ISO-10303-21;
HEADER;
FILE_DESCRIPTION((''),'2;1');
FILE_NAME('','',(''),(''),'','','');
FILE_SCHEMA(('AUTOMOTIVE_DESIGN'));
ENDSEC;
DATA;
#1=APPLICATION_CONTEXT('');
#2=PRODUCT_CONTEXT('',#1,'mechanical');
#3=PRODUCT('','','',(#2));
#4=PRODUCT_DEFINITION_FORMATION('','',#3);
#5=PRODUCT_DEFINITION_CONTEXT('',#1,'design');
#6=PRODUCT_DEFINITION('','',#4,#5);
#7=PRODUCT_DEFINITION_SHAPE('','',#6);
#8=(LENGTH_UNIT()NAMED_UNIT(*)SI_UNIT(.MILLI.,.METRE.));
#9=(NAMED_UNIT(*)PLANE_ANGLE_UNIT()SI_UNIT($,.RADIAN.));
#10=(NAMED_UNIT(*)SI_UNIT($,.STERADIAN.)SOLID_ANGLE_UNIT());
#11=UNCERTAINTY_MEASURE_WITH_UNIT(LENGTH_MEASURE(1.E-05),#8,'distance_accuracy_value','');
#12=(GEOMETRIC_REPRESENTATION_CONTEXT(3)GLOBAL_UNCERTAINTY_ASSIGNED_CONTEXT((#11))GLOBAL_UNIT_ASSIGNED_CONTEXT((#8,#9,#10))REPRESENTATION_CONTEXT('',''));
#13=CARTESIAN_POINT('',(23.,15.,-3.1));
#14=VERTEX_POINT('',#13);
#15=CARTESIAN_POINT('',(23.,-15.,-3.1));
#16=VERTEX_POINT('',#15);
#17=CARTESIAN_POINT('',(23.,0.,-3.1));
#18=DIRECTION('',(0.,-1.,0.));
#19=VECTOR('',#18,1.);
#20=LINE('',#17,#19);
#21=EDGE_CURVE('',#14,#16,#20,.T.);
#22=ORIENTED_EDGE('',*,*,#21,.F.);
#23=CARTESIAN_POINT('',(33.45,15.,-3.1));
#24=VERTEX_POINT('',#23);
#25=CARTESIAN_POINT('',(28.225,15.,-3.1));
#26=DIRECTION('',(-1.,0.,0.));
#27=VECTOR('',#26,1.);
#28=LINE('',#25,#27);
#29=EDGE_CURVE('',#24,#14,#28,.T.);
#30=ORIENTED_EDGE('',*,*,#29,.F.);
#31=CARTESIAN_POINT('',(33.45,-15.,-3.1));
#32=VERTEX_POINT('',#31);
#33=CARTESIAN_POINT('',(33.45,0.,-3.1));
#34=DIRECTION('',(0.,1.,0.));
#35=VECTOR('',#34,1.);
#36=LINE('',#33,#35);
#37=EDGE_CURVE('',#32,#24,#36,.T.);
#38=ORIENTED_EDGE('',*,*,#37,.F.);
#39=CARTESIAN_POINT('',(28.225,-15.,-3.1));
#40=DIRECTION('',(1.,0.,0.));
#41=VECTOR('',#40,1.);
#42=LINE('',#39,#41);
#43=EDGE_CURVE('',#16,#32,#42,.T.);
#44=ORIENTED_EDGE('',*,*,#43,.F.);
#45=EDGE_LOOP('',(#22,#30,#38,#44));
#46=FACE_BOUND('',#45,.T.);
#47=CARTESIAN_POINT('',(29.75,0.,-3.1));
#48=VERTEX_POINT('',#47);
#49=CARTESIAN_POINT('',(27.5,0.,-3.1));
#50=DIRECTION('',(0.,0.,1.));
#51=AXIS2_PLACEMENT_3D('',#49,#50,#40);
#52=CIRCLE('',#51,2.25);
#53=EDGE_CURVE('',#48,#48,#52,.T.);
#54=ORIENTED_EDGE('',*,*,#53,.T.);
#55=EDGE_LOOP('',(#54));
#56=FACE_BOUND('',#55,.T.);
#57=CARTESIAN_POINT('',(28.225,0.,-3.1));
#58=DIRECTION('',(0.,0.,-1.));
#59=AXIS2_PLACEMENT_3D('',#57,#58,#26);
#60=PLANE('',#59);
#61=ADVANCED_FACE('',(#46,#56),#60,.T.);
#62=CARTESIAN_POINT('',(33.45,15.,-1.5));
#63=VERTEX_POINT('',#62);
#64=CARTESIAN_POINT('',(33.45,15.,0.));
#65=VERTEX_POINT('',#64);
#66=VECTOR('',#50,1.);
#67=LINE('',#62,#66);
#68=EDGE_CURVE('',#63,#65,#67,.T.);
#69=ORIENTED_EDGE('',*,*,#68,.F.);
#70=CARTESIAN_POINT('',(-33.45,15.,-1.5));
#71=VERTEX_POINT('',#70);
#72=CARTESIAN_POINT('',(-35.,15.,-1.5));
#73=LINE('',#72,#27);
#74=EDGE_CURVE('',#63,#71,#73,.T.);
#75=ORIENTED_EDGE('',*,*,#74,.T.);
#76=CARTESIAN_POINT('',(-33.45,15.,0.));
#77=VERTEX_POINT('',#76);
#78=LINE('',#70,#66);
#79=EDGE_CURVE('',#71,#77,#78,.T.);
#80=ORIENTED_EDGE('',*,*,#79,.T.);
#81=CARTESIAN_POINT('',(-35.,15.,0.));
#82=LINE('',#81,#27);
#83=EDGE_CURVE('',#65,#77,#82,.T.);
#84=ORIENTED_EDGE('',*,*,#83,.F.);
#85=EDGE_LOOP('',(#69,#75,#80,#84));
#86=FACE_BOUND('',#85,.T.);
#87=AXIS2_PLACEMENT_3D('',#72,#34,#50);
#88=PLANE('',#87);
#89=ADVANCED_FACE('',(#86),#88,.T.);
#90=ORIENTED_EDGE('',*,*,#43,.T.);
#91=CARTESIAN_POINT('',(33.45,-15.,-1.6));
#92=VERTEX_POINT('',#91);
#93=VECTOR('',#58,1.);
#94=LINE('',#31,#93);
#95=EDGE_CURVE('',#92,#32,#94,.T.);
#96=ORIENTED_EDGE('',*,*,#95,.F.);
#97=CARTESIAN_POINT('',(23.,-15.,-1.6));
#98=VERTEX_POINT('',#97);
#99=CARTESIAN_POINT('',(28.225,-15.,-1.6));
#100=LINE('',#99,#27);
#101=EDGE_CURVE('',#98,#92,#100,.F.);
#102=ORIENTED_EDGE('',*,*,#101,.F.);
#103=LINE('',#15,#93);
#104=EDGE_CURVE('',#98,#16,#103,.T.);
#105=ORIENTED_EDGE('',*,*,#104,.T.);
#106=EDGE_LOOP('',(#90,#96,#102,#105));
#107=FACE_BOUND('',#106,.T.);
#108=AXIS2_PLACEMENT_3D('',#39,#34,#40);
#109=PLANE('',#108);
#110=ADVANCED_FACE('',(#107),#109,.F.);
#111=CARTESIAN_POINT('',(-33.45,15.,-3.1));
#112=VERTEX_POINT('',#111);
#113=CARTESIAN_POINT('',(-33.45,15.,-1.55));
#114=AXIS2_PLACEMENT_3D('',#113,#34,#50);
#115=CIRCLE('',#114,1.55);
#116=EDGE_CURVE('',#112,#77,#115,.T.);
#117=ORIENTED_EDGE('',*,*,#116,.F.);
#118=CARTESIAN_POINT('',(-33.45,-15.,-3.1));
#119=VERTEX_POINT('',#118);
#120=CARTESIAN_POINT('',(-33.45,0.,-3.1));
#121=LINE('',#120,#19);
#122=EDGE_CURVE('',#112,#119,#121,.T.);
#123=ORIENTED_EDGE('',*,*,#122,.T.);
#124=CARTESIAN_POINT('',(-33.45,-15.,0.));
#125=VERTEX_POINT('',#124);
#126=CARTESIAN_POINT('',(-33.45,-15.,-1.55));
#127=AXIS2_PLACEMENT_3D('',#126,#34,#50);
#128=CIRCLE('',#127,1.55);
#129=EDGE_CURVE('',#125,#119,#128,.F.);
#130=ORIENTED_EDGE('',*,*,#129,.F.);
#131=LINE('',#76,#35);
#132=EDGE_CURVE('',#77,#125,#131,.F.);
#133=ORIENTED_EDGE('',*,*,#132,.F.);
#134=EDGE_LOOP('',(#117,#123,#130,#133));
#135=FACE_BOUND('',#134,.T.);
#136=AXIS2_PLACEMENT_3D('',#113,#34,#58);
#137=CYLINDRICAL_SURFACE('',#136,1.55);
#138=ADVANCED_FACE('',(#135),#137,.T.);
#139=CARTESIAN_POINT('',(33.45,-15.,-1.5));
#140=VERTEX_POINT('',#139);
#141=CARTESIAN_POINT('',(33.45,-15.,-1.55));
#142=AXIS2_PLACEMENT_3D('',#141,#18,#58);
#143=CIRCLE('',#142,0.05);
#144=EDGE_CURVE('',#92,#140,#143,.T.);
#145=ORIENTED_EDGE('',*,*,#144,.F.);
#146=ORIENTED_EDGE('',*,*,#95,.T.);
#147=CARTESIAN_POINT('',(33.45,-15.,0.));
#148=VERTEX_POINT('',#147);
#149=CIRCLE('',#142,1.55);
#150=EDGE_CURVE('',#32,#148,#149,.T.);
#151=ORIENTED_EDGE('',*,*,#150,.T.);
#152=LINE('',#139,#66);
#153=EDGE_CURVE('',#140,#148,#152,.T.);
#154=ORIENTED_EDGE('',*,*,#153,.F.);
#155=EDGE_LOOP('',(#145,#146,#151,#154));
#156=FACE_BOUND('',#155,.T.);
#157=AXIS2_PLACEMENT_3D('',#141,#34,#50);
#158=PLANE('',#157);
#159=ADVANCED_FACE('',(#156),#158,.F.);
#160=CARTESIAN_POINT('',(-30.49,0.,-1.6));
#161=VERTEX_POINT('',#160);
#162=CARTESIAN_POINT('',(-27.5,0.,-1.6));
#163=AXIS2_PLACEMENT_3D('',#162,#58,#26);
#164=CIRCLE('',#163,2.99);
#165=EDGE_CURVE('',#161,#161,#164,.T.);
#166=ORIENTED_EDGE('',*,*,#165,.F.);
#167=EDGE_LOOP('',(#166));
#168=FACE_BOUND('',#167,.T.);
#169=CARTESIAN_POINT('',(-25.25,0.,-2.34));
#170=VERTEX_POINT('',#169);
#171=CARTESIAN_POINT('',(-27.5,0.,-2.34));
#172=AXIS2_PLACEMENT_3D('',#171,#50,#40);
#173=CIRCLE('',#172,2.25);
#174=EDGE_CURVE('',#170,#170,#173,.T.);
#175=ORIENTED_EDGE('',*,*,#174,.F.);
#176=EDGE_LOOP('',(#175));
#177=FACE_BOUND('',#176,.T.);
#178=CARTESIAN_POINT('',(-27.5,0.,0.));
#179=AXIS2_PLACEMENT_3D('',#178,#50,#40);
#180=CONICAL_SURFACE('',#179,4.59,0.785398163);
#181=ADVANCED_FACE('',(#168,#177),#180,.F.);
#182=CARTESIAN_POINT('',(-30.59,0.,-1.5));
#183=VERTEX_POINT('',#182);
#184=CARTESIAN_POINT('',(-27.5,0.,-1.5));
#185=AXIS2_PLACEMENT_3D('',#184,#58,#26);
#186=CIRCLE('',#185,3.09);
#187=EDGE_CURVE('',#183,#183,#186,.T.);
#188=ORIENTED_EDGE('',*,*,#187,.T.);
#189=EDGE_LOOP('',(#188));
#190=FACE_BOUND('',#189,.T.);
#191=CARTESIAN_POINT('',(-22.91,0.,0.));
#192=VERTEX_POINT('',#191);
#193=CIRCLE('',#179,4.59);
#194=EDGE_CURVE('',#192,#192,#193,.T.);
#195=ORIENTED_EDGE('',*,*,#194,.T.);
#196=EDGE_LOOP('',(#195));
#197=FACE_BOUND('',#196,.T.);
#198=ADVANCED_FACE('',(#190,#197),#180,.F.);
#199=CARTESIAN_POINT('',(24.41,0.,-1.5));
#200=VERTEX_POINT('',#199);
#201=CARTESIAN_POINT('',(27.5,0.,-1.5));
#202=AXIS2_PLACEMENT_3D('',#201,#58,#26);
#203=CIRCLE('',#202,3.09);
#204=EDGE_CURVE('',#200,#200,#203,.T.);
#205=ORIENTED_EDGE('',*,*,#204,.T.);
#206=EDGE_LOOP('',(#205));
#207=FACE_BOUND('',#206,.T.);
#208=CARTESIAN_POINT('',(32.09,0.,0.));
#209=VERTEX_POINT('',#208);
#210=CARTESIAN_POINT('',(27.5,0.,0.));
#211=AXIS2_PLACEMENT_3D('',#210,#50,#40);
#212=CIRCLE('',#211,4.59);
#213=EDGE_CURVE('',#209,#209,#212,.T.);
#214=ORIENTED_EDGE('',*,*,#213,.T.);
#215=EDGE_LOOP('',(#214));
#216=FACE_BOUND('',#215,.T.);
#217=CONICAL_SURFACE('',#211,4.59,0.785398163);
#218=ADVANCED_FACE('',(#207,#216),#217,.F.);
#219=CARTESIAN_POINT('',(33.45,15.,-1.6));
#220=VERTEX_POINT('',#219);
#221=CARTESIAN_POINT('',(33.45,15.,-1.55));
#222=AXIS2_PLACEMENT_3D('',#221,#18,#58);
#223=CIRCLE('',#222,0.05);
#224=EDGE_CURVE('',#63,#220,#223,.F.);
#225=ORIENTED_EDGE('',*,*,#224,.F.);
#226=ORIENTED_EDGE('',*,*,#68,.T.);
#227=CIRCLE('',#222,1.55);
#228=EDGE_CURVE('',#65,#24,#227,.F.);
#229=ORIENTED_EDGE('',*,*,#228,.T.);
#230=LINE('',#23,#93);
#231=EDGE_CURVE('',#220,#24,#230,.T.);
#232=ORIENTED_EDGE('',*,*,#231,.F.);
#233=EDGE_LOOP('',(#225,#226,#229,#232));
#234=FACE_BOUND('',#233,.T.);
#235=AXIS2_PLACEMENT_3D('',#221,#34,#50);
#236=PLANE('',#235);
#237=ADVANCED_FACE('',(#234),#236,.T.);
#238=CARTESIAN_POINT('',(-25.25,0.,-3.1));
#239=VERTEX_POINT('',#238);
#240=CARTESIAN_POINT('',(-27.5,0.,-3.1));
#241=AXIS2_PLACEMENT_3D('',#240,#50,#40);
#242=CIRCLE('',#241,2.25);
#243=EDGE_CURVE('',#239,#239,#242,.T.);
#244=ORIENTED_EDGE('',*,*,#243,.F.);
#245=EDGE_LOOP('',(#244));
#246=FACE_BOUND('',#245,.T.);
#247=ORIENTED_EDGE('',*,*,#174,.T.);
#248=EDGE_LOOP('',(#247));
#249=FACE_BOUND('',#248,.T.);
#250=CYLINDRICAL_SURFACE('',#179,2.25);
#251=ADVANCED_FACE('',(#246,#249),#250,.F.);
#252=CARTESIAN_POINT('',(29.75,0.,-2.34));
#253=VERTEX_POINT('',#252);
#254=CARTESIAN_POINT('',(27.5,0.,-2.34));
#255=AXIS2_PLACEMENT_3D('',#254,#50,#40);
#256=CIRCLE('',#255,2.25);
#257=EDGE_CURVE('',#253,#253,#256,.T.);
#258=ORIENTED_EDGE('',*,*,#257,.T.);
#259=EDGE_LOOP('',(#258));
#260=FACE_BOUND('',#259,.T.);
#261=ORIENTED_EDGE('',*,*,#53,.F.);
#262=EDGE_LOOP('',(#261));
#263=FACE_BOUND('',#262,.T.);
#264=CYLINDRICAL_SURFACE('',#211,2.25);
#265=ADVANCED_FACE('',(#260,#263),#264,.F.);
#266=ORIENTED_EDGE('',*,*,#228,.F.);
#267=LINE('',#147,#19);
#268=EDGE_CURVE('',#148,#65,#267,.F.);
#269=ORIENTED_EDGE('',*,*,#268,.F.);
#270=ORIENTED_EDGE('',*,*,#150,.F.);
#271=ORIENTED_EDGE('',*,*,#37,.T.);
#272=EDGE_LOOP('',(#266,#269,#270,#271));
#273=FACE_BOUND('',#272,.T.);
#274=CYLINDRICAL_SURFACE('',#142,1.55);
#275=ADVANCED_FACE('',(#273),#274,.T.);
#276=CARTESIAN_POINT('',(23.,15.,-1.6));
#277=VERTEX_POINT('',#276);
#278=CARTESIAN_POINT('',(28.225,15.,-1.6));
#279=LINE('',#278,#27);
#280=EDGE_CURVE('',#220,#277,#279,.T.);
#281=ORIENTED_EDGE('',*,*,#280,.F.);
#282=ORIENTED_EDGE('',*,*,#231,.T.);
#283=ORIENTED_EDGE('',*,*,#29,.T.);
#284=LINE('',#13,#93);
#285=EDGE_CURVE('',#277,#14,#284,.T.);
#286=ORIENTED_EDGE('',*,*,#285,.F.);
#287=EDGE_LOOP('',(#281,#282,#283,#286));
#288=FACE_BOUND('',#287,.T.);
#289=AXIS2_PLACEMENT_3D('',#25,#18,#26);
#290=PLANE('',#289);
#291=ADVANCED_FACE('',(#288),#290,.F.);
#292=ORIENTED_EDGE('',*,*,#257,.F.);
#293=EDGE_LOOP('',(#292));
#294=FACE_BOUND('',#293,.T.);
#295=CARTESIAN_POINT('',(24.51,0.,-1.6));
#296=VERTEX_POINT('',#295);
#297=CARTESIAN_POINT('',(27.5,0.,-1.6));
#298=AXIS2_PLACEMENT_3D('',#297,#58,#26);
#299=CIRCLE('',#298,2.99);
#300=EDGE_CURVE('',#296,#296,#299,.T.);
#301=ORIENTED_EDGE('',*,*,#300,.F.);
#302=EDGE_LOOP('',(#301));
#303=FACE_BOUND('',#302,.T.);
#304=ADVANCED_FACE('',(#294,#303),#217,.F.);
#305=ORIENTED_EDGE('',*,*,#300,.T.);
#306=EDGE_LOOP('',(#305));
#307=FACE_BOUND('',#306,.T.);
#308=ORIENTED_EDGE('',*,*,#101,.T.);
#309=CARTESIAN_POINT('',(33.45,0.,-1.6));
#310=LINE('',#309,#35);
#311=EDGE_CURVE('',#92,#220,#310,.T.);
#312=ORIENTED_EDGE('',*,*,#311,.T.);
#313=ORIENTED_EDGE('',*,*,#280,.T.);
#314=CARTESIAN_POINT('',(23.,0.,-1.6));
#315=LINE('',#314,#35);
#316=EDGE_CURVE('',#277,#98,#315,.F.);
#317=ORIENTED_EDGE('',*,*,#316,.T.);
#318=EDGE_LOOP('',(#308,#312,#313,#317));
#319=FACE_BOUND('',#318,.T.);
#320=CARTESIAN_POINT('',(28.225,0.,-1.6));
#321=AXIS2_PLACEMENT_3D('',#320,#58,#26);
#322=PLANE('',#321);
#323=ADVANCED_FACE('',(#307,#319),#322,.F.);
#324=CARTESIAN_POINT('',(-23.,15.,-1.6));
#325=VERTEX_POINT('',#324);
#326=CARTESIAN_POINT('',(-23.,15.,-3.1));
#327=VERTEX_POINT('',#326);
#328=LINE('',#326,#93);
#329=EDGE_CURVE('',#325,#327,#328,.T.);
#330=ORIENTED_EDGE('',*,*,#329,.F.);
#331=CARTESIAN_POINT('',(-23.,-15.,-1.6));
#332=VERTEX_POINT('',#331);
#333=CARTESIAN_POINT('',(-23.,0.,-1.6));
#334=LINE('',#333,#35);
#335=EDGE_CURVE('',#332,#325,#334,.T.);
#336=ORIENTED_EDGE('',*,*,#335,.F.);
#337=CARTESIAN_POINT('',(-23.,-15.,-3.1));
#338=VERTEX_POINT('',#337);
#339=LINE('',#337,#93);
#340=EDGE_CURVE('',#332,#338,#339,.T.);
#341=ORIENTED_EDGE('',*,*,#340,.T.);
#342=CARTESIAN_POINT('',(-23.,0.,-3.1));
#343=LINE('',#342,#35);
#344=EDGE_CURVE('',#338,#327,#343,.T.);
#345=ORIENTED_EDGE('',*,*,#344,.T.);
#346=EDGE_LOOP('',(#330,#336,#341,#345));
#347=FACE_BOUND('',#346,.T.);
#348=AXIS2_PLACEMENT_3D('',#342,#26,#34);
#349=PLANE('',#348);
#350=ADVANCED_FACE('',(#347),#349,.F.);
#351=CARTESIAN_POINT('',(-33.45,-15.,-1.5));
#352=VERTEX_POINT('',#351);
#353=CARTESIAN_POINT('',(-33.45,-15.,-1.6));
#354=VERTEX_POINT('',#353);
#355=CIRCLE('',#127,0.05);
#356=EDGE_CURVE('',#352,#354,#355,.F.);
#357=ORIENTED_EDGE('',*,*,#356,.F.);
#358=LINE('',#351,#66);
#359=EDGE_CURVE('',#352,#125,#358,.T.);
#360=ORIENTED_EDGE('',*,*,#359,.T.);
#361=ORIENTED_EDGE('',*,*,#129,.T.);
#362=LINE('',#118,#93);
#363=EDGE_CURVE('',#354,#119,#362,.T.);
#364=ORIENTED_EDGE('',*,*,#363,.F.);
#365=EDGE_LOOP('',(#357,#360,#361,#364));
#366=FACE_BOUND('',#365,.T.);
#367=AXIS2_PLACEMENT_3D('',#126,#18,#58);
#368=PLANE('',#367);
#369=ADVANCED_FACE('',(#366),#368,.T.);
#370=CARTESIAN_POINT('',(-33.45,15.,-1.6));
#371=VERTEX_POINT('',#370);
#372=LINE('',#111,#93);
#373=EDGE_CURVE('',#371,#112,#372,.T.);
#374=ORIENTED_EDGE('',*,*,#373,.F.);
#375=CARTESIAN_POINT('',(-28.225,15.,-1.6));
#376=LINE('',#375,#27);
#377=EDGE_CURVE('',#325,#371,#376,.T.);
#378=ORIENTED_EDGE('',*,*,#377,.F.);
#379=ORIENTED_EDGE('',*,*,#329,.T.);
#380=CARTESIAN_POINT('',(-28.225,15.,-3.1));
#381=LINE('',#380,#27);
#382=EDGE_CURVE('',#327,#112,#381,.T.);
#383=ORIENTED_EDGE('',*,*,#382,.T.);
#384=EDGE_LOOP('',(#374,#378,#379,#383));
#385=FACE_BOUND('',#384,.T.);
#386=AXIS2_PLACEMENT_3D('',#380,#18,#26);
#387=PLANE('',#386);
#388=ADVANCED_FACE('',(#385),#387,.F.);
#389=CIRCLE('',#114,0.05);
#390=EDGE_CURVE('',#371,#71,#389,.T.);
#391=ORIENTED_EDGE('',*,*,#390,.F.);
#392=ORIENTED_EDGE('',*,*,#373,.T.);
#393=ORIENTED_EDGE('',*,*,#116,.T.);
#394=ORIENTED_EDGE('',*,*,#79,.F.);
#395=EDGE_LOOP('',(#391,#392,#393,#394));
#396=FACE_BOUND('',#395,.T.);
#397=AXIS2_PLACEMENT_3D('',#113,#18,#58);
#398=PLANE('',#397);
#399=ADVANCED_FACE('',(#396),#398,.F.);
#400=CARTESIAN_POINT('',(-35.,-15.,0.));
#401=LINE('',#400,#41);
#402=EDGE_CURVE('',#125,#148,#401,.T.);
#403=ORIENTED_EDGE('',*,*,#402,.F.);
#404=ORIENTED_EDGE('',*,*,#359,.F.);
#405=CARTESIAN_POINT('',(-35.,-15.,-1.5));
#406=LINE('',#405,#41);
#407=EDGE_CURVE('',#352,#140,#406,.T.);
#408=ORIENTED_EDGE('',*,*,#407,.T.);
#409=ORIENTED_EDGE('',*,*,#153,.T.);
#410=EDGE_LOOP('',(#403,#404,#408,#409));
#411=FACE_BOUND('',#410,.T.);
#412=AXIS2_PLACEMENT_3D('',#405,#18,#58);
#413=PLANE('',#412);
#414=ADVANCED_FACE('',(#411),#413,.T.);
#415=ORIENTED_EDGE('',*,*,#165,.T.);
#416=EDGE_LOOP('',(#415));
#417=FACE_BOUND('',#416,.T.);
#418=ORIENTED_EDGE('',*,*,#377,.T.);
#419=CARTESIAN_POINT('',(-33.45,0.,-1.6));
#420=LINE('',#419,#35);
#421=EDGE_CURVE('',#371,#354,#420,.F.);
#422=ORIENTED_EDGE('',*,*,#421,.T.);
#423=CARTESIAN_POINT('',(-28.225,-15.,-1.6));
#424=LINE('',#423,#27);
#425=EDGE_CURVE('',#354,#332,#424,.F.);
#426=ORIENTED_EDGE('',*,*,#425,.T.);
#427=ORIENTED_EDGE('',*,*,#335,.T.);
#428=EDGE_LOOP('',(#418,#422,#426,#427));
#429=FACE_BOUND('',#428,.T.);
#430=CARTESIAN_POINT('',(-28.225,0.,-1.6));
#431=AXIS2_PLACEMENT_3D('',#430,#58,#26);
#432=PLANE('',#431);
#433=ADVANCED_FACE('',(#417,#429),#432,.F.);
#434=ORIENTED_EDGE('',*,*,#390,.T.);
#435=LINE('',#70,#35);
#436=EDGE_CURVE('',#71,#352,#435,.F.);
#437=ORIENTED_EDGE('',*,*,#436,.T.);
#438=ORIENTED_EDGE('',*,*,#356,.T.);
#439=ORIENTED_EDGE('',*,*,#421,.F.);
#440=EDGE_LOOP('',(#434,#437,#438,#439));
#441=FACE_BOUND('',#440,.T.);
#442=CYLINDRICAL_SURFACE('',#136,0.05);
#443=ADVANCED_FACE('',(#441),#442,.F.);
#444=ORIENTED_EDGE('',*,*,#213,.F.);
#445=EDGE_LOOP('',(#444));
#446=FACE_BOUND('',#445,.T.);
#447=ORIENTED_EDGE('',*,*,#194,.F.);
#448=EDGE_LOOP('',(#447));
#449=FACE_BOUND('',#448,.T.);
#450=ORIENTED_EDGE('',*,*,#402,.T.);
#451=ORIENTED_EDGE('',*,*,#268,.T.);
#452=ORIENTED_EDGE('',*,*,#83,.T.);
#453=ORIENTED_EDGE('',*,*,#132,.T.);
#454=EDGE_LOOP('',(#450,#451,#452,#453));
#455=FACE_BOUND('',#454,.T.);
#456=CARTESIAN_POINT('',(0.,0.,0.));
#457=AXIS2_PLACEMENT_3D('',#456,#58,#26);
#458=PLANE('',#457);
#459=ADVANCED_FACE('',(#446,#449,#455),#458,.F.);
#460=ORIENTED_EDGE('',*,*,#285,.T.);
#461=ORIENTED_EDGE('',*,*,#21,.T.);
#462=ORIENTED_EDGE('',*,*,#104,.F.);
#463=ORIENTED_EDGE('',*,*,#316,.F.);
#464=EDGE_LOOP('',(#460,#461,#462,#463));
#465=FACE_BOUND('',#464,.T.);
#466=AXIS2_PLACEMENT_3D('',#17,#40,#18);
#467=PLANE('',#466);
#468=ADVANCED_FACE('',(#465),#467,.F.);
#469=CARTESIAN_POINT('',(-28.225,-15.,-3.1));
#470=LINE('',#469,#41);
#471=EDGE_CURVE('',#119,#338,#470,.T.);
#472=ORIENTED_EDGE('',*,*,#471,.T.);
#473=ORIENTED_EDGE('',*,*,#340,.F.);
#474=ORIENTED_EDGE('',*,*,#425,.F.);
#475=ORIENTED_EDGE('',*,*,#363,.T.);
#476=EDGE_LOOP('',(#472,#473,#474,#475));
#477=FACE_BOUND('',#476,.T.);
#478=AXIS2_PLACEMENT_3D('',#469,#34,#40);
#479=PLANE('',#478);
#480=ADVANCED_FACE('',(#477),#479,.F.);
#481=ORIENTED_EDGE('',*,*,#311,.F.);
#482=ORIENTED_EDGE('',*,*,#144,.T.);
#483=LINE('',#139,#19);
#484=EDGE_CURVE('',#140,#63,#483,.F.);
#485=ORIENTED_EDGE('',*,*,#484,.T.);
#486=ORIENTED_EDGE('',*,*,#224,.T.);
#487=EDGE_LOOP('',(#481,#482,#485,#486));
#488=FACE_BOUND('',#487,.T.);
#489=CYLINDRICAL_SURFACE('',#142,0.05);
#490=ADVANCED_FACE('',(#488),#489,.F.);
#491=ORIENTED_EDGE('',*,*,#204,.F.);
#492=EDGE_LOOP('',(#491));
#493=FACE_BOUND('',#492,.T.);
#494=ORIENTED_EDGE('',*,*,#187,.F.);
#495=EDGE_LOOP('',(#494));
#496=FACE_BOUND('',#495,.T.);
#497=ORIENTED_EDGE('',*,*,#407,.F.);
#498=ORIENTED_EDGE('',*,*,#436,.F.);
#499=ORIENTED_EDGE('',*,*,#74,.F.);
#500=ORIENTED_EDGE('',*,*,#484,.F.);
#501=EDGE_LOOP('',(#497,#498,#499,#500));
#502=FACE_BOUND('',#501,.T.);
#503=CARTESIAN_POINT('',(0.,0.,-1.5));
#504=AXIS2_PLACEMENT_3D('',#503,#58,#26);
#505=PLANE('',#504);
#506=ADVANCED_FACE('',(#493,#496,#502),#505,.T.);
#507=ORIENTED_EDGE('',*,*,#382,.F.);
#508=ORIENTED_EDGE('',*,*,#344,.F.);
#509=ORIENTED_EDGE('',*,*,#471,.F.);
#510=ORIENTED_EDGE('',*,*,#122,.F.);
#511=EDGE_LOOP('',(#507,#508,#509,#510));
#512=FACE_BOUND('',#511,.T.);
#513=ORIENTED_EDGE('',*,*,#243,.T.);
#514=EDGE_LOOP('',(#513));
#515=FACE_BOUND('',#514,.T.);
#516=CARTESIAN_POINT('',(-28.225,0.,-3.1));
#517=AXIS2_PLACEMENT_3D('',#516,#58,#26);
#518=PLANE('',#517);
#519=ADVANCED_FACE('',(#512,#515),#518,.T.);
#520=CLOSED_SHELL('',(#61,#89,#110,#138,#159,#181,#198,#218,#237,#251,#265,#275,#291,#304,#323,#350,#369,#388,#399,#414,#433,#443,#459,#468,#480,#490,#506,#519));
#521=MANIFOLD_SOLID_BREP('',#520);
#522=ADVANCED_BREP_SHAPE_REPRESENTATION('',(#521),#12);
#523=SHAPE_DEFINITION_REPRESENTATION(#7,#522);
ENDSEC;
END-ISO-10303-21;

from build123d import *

# Parameters (mm, degrees)
SKETCH_2_W                  = 70
SKETCH_2_H                  = 30
SM_BASE_FLANGE_1_DEPTH      = 1.5
OTHER_START                 = -15
OTHER_1_DEPTH               = 30
OTHER_1_2_DEPTH             = 30
HOLE_WIZARD_M4_1_AT_2_COUNT = 2
HOLE_WIZARD_M4_1_AT_2_PITCH = 55


# Read off the part's stored shape, not the designer's step: 褶边1
# Sheet-metal steps are written as plain solids
with BuildPart() as part:
    # 草图2 → 基体-法兰1 (new body)
    with BuildSketch(Plane.XY):
        Rectangle(SKETCH_2_W, SKETCH_2_H)
    extrude(amount=-SM_BASE_FLANGE_1_DEPTH)

    # Other 1 outline → Other 1 (cut)
    with BuildSketch(Plane(origin=(0, 0, 0), x_dir=(1, 0, 0), z_dir=(0, 1, 0)).offset(OTHER_START)):
        with BuildLine():
            Line((35, 1.5), (34.999193338, 1.5))
            ThreePointArc((34.999193338, 1.5), (34.528192933, 0.436447127), (33.45, 0))
            Line((33.45, 0), (35, 0))
            Line((35, 0), (35, 1.5))
        make_face()
        with BuildLine():
            ThreePointArc((-33.45, 0), (-34.528192933, 0.436447127), (-34.999193338, 1.5))
            Line((-34.999193338, 1.5), (-35, 1.5))
            Line((-35, 1.5), (-35, 0))
            Line((-35, 0), (-33.45, 0))
        make_face()
    extrude(amount=OTHER_1_DEPTH, mode=Mode.SUBTRACT)

    # Other 1 2 outline → Other 1 2 (add)
    with BuildSketch(Plane(origin=(0, 0, 0), x_dir=(1, 0, 0), z_dir=(0, 1, 0)).offset(OTHER_START)):
        with BuildLine():
            Line((23, 3.1), (23, 1.6))
            Line((23, 1.6), (33.45, 1.6))
            ThreePointArc((33.45, 1.6), (33.5, 1.55), (33.45, 1.5))
            Line((33.45, 1.5), (34.999193338, 1.5))
            ThreePointArc((34.999193338, 1.5), (34.563552873, 2.628192933), (33.45, 3.1))
            Line((33.45, 3.1), (23, 3.1))
        make_face()
        with BuildLine():
            Line((-34.999193338, 1.5), (-33.45, 1.5))
            ThreePointArc((-33.45, 1.5), (-33.5, 1.55), (-33.45, 1.6))
            Line((-33.45, 1.6), (-23, 1.6))
            Line((-23, 1.6), (-23, 3.1))
            Line((-23, 3.1), (-33.45, 3.1))
            ThreePointArc((-33.45, 3.1), (-34.563552873, 2.628192933), (-34.999193338, 1.5))
        make_face()
    extrude(amount=OTHER_1_2_DEPTH)

    # 草图9 → M4 六角凹锥坑头螺钉的锥形沉头孔1 (revolve, cut)
    with BuildSketch(Plane(origin=(27.5, 0, 0), x_dir=(0, -1, 0), z_dir=(1, 0, 0))):
        Polygon((0, 0), (0, 3.1), (2.25, 3.1), (2.25, 2.34), (4.59, 0), align=None)
    hole_wizard_m4_1 = revolve(axis=Axis((27.5, 0, 6.35), (0, 0, -1)), mode=Mode.SUBTRACT)

    # M4 六角凹锥坑头螺钉的锥形沉头孔1 at 2: M4 六角凹锥坑头螺钉的锥形沉头孔1 ×2
    with Locations(*[(-i * HOLE_WIZARD_M4_1_AT_2_PITCH, 0, 0) for i in range(1, HOLE_WIZARD_M4_1_AT_2_COUNT)]):
        add(hole_wizard_m4_1, mode=Mode.SUBTRACT)


solid = part.part
